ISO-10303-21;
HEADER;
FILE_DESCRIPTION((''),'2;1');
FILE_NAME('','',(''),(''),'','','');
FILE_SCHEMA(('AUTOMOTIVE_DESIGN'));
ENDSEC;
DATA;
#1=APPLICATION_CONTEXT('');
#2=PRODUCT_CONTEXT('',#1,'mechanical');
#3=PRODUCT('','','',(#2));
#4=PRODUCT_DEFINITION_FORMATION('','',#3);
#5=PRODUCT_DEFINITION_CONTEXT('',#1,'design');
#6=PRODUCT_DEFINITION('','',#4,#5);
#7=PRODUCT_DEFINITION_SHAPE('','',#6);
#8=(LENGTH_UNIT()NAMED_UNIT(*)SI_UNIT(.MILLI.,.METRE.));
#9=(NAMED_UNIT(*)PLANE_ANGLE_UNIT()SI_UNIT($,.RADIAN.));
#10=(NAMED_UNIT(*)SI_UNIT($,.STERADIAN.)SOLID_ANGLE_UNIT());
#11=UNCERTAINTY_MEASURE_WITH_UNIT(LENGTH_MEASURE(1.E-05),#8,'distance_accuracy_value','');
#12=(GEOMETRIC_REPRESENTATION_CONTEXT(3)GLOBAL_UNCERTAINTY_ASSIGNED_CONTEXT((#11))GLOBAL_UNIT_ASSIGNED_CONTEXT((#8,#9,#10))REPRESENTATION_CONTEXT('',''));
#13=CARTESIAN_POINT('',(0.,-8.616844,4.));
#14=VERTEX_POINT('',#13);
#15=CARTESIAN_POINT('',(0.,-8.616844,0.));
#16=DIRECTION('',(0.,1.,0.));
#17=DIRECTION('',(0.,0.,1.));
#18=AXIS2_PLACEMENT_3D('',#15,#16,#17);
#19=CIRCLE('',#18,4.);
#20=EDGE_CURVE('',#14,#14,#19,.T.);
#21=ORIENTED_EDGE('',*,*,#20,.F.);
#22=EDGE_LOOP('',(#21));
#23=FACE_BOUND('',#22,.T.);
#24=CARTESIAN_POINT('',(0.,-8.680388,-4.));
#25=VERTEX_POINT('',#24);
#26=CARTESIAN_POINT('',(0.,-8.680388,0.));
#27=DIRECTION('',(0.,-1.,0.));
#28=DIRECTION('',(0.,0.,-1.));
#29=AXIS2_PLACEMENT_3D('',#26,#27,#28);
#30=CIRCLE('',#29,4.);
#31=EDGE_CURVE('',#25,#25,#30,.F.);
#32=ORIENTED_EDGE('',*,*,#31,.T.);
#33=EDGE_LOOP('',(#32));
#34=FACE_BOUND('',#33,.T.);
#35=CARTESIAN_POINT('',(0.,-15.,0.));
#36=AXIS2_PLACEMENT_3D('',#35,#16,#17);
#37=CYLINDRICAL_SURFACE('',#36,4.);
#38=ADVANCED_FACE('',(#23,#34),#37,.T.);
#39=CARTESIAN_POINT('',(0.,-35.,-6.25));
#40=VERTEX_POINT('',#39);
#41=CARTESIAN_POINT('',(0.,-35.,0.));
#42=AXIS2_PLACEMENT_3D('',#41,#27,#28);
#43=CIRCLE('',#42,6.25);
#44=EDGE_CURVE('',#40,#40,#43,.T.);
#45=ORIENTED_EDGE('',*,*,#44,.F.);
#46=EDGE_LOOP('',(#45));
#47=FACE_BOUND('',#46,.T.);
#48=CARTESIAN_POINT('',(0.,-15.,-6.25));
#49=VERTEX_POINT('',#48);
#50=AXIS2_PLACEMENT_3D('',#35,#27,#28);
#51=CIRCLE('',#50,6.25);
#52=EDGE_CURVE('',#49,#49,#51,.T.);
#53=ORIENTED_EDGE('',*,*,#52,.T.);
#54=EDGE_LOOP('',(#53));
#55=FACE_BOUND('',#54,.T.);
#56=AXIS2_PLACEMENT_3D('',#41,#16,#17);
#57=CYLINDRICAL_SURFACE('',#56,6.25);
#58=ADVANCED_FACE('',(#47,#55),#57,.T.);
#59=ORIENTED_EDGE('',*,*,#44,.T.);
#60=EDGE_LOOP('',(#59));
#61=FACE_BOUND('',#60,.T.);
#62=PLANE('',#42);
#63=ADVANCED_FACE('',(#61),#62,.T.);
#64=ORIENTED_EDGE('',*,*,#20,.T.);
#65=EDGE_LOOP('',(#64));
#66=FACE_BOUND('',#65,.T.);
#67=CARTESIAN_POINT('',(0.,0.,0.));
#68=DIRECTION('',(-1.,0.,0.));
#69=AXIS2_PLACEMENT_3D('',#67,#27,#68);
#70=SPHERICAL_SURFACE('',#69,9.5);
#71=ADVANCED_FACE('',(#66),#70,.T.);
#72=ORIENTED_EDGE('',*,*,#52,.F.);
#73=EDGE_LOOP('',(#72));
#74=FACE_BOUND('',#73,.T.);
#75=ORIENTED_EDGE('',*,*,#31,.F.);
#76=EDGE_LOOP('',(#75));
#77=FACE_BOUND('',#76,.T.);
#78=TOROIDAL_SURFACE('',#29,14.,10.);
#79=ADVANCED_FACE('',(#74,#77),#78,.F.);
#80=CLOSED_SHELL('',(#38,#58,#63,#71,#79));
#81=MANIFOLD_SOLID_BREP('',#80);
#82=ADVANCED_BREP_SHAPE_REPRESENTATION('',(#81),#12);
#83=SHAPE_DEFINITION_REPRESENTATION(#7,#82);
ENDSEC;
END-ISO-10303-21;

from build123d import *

# Parameters (mm, degrees)
SKETCH2_R           = 4
BOSS_EXTRUDE1_DEPTH = 15
SKETCH3_R           = 6.25
BOSS_EXTRUDE2_DEPTH = 20
FILLET1_R           = 10


with BuildPart() as part:
    # Sketch1 → Revolve1 (revolve)
    with BuildSketch(Plane.XY):
        with BuildLine():
            Line((0, 0), (0, 9.5))
            ThreePointArc((0, 9.5), (-9.5, 0), (0, -9.5))
            Line((0, -9.5), (0, 0))
        make_face()
    revolve(axis=Axis((0, 0, 0), (0, 1, 0)))

    # Sketch2 → Boss-Extrude1 (add)
    with BuildSketch(Plane(origin=(0, 0, 0), x_dir=(1, 0, 0), z_dir=(0, 1, 0))):
        with Locations(Location((0, 0, 0), (0, 0, 270))):
            Circle(SKETCH2_R)
    extrude(amount=-BOSS_EXTRUDE1_DEPTH)

    # Sketch3 → Boss-Extrude2 (add)
    with BuildSketch(Plane.XZ.offset(15)):
        with Locations(Location((0, 0, 0), (0, 0, 270))):
            Circle(SKETCH3_R)
    extrude(amount=BOSS_EXTRUDE2_DEPTH)

    # Fillet1
    # the kernel refuses this fillet: 10 mm, written as the material it adds along each edge
    with BuildSketch(Plane(origin=(0, -15, 0), x_dir=(0, 0, 1), z_dir=(-1, 0, 0))) as fillet1_piece_1:
        with BuildLine():
            CenterArc((14, 6.31961233), FILLET1_R, 180, 39.194967426)
            Line((4, 6.31961233), (3.8, 6.31961233))
            Line((3.8, 6.31961233), (3.8, 0))
            Line((3.8, 0), (4, -0.2))
            ThreePointArc((4, -0.2), (5.125, -0.2), (6.095, -0.126392247))
            Line((6.095, -0.126392247), (6.25, 0))
        make_face()
    revolve(axis=Axis((0, -15, 0), (0, 1, 0)))


solid = part.part
